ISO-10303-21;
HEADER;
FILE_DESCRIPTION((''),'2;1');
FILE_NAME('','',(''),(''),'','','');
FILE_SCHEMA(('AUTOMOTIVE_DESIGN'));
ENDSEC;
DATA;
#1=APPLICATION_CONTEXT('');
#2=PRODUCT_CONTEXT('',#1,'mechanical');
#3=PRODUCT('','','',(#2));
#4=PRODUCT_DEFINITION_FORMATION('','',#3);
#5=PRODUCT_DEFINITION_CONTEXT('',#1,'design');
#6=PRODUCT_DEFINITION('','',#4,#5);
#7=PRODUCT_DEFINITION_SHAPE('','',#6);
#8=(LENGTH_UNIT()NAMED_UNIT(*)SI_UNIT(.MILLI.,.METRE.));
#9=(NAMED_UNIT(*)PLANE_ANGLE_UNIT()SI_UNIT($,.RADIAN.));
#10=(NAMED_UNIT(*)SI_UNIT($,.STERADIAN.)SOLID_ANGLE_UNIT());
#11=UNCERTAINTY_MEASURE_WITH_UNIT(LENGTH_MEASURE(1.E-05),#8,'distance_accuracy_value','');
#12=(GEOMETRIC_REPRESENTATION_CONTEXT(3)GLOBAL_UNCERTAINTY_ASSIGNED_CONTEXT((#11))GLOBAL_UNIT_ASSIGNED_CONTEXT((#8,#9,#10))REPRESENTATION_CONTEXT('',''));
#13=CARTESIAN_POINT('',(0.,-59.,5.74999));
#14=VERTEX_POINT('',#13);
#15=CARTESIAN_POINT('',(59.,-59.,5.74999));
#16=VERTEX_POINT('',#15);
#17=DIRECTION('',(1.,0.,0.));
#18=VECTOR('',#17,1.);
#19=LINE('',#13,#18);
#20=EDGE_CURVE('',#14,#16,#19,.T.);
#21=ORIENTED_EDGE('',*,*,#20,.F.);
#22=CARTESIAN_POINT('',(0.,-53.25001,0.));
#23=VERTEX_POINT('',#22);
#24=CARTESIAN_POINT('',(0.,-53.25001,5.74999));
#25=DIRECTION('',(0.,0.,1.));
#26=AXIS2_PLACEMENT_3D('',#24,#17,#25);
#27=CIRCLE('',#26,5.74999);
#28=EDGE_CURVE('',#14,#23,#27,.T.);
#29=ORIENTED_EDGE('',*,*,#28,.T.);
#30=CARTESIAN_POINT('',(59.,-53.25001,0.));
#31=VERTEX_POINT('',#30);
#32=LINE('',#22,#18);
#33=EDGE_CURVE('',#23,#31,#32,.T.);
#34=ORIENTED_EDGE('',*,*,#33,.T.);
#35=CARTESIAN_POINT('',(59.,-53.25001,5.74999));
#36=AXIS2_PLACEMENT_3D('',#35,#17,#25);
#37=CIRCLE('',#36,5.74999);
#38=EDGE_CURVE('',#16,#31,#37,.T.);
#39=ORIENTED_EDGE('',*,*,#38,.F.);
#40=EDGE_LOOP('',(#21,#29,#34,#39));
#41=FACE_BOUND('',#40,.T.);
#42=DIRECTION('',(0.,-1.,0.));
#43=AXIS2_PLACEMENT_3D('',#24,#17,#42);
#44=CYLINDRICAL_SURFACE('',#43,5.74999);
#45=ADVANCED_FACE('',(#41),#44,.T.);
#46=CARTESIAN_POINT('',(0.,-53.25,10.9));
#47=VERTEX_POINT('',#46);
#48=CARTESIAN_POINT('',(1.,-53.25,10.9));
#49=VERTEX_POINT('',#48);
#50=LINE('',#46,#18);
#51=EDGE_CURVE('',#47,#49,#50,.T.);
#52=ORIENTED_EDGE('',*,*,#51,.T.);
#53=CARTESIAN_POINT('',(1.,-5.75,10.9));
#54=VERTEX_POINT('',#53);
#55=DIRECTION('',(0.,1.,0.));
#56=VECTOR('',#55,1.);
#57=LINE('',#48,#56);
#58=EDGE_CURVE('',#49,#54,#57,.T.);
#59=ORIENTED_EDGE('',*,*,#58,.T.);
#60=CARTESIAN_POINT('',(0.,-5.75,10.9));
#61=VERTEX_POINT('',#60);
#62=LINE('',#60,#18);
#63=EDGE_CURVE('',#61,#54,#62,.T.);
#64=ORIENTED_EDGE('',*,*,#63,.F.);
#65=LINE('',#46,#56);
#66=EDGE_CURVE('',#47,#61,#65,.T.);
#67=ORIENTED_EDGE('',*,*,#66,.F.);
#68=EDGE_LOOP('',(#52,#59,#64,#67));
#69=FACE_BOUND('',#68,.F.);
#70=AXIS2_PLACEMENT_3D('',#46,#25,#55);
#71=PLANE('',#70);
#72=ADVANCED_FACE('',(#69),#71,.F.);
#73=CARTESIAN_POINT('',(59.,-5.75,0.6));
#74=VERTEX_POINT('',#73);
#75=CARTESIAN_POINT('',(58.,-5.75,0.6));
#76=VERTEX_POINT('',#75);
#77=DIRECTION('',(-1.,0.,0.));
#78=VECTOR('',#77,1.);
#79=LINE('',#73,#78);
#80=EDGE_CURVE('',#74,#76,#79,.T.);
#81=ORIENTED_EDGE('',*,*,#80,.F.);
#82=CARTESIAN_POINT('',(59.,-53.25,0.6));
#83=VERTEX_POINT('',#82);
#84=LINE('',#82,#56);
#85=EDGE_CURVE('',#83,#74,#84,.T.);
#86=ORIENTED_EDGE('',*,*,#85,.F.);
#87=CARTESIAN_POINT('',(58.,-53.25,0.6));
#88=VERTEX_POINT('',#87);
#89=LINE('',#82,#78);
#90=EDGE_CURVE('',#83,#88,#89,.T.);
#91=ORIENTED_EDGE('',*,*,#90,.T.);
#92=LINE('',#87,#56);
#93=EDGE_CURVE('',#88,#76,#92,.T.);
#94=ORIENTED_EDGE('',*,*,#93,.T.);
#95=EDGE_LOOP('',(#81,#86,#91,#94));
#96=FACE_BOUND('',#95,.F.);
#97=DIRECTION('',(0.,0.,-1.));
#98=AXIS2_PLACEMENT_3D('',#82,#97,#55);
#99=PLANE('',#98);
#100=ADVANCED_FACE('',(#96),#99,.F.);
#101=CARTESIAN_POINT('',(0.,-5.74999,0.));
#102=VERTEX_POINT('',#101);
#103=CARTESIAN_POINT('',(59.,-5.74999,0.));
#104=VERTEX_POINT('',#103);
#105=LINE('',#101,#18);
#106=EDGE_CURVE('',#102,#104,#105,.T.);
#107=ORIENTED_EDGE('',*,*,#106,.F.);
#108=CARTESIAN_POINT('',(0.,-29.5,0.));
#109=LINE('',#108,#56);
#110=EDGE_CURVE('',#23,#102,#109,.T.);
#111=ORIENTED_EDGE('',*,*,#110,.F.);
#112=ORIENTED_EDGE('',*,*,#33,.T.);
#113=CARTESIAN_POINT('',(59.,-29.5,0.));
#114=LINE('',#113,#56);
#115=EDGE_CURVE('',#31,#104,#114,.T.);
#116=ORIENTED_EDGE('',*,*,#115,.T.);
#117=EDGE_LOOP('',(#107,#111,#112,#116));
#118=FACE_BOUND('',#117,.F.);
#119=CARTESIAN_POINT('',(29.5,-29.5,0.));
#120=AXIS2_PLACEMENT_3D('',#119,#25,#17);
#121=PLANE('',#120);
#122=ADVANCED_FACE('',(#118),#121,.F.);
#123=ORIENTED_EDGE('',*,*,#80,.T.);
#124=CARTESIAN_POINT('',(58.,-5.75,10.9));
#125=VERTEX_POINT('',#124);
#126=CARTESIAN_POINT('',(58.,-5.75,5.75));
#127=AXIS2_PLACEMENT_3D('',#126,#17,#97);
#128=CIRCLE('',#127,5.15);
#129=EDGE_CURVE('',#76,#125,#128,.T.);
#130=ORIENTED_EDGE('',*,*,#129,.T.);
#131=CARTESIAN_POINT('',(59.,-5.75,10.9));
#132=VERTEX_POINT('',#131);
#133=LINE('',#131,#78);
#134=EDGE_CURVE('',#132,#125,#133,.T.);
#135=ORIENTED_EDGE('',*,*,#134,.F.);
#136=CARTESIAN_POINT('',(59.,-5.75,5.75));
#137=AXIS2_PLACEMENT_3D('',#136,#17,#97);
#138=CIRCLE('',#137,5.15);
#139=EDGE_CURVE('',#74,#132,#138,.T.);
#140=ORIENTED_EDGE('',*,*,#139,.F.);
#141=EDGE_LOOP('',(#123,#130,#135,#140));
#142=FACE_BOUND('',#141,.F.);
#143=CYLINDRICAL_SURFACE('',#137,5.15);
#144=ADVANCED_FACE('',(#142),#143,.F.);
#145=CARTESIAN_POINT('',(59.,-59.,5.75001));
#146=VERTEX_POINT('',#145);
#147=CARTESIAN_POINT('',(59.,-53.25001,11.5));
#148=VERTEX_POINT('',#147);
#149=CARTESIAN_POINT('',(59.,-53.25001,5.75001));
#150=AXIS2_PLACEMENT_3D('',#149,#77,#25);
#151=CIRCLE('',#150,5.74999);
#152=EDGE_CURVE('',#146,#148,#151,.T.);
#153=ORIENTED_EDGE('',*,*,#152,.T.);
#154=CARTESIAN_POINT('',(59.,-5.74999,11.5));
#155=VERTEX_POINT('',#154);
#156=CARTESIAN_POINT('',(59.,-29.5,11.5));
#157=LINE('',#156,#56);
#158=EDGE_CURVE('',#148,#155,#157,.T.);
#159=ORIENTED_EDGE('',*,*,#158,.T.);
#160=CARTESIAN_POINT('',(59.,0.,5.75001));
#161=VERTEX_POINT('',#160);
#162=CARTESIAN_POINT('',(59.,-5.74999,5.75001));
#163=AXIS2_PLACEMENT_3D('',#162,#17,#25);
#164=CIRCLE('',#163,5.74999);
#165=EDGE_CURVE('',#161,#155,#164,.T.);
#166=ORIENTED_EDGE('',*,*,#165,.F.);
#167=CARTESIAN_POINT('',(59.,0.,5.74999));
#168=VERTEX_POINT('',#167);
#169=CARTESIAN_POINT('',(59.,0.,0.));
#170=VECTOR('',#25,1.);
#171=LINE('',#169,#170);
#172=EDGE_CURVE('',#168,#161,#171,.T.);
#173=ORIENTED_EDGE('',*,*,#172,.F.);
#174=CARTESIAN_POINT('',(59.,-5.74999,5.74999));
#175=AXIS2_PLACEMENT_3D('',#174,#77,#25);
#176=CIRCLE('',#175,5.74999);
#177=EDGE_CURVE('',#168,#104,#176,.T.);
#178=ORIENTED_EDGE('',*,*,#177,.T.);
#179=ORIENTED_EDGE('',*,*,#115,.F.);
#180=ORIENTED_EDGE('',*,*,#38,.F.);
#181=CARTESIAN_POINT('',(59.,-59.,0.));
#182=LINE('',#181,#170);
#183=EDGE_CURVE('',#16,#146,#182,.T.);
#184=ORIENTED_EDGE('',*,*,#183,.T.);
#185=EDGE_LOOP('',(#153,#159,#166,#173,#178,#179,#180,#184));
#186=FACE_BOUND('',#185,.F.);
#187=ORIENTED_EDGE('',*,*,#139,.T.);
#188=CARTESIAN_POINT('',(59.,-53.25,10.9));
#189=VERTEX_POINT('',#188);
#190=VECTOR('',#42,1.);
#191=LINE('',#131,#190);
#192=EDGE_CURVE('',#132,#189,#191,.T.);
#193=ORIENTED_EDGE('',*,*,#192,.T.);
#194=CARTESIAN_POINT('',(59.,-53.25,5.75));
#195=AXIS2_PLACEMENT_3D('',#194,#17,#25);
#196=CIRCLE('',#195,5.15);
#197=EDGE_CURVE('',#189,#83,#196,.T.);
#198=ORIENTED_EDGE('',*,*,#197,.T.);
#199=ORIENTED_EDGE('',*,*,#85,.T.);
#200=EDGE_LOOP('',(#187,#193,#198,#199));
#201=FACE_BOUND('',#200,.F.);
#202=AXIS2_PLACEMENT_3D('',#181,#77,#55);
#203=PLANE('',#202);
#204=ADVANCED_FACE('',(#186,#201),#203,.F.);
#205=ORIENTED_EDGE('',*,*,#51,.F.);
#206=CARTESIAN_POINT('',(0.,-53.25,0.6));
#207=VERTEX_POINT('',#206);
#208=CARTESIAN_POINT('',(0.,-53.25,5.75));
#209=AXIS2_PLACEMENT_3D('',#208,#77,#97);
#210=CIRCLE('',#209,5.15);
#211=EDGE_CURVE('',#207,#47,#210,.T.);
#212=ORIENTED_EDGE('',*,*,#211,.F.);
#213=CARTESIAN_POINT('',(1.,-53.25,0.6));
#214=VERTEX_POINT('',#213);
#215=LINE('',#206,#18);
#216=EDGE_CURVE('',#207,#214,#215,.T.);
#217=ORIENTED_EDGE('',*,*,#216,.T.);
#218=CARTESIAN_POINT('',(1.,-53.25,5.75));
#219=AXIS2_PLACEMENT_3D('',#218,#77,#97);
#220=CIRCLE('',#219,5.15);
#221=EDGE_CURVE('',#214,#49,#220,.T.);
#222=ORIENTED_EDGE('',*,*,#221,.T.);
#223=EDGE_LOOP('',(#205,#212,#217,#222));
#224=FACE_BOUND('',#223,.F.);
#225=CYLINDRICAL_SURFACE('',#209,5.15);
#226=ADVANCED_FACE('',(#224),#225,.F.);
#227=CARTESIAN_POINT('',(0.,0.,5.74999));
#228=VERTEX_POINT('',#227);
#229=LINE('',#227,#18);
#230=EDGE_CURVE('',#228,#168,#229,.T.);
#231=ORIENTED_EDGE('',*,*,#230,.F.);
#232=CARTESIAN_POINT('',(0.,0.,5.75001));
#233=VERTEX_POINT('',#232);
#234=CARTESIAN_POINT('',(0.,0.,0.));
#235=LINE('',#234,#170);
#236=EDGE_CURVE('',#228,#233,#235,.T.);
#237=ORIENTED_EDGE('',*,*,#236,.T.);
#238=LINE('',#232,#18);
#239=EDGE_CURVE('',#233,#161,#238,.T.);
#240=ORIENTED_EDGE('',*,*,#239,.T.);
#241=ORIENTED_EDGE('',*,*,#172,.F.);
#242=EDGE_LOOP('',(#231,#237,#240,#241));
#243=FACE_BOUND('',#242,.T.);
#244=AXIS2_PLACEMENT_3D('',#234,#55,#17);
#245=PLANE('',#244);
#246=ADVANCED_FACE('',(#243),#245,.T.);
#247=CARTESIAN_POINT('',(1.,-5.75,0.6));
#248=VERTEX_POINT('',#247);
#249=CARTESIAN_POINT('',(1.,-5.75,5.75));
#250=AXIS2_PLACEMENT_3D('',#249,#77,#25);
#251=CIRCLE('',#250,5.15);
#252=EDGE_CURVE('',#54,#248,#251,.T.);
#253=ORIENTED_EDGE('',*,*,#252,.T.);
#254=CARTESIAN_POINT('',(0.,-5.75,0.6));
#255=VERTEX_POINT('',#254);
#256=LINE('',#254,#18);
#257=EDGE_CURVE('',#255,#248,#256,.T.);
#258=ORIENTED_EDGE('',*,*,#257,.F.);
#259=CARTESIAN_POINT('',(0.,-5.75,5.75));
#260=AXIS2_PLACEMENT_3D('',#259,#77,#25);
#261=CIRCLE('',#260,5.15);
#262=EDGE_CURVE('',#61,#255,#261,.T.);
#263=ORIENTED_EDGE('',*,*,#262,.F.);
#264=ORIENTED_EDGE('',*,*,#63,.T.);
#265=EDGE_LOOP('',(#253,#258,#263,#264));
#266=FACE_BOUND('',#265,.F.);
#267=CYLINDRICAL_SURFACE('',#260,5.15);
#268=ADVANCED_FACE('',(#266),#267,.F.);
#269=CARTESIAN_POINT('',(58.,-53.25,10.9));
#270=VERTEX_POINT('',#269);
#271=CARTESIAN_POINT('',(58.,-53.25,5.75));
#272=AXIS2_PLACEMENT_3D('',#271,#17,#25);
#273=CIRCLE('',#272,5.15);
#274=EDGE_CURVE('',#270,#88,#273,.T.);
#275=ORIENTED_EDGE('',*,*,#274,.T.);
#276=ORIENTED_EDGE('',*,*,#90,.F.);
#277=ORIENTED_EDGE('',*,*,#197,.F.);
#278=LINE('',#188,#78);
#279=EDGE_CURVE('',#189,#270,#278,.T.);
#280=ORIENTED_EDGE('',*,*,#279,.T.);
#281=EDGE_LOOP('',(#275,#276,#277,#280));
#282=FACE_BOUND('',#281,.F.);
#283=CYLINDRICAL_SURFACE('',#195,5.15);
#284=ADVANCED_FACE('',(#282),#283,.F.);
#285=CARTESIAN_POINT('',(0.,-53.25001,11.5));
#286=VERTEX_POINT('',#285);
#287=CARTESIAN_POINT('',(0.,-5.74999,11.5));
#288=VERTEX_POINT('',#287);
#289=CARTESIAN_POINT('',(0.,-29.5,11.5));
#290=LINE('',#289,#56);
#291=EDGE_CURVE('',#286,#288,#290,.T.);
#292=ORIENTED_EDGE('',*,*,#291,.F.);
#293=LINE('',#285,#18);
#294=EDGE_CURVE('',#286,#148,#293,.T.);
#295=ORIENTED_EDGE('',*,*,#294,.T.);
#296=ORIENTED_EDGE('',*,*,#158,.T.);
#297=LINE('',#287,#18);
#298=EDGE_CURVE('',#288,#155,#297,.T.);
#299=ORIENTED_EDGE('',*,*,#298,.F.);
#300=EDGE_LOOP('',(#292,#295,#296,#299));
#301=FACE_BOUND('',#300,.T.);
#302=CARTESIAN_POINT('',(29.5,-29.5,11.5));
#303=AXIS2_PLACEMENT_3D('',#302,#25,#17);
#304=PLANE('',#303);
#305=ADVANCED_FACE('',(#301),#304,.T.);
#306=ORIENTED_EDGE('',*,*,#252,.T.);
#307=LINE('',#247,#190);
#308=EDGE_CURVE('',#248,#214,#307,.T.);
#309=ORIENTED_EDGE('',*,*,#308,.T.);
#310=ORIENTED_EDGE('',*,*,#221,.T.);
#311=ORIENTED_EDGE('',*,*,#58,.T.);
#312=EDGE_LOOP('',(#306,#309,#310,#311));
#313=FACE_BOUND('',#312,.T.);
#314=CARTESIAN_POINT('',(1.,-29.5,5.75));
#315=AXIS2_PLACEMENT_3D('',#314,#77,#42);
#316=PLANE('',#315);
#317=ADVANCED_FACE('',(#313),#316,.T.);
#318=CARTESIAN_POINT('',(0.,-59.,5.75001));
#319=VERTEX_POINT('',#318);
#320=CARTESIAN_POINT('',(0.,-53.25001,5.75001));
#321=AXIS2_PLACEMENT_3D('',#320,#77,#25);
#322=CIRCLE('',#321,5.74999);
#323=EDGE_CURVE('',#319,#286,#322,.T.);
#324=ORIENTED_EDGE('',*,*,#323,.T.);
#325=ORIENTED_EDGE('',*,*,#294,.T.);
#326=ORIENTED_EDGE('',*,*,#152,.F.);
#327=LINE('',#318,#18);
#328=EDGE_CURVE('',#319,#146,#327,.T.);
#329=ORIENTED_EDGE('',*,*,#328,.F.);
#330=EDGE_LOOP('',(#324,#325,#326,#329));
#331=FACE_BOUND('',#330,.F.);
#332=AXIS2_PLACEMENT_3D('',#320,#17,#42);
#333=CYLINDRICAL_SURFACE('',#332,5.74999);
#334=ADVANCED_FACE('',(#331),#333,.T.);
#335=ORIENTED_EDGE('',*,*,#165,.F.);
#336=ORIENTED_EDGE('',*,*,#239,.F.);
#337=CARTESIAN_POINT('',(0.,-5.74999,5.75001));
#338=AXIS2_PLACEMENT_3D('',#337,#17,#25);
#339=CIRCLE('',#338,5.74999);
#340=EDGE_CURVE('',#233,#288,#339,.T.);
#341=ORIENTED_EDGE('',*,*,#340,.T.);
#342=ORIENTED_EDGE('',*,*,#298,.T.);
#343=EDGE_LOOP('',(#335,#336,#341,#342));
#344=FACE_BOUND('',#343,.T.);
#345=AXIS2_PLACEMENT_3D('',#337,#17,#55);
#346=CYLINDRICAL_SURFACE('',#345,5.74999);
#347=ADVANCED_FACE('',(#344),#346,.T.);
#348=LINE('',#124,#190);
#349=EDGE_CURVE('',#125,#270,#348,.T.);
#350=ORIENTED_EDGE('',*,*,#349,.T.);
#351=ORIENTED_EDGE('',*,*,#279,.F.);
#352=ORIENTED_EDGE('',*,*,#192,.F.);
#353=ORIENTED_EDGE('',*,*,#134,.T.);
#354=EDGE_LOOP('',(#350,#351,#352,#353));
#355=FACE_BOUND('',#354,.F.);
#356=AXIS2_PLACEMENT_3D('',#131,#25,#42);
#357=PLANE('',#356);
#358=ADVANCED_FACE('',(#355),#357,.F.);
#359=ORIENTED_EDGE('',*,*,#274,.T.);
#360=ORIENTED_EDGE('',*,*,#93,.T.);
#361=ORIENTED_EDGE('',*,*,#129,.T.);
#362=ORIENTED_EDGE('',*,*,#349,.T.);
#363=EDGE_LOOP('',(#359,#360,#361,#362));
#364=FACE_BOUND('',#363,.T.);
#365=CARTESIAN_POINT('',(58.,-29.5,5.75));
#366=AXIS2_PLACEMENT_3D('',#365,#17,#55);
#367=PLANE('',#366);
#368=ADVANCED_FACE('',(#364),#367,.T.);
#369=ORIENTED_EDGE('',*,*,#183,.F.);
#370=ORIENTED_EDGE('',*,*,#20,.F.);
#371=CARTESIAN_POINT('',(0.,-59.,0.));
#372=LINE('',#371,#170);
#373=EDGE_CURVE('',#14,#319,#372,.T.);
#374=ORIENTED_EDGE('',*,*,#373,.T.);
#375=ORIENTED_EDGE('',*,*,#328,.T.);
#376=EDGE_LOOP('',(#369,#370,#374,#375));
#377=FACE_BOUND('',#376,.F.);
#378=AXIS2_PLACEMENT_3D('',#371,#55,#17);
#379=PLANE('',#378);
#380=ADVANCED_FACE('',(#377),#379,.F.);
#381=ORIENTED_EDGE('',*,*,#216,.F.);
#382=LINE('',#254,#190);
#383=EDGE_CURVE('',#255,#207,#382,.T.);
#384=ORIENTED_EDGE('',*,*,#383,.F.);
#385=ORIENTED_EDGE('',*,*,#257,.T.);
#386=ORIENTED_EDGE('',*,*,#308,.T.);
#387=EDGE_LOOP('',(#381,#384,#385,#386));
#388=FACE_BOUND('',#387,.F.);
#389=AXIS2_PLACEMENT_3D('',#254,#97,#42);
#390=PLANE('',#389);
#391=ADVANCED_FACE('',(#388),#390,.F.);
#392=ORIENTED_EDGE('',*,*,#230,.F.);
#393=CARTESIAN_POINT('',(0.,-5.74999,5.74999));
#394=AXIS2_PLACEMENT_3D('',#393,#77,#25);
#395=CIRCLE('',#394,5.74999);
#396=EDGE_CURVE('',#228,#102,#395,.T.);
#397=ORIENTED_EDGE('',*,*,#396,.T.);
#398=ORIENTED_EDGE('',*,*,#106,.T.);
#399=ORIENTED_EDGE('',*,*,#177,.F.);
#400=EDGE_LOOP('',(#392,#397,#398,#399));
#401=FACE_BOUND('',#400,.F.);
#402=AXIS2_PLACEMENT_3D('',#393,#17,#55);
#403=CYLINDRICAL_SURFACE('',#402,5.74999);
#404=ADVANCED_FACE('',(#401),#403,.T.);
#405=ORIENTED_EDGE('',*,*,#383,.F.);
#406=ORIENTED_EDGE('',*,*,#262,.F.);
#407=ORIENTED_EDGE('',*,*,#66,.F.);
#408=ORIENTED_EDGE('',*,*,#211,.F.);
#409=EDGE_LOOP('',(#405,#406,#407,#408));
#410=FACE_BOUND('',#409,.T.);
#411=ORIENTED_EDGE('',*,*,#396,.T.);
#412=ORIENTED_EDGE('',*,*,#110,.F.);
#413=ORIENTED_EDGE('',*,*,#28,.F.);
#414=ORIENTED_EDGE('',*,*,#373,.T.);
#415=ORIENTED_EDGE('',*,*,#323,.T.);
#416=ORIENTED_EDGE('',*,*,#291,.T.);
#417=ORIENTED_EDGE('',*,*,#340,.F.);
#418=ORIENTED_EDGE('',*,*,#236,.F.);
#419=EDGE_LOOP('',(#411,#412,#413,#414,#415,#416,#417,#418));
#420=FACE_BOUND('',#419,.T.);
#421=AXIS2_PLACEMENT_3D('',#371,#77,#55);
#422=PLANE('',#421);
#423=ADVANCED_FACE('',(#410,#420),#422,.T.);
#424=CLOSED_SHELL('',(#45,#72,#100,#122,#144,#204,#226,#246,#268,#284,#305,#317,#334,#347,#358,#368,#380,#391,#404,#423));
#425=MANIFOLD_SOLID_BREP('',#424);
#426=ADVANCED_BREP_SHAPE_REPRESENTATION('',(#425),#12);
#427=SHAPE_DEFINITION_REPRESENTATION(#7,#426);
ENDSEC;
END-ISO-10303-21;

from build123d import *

# Parameters (mm, degrees)
F0_W     = 59
F0_H     = 59
F1_DEPTH = 11.5
F2_R     = 5.74999
F4_DEPTH = 1
F6_DEPTH = 1


# Not quite as in the source:
# - a fillet or chamfer is up to 0.001 mm smaller than in the source, because OpenCascade refuses the exact size


with BuildPart() as f1:
    # F0 (on Top) → F1 (new body)
    with BuildSketch(Plane.XY):
        with Locations((29.5, -29.5)):
            Rectangle(F0_W, F0_H)
    extrude(amount=F1_DEPTH)

    # F2 (radius 5.75 in the source; OpenCascade refuses exactly that, so slightly less here)
    f2_edges = [f1.edges().sort_by_distance(p)[0] for p in [
        (29.5, -59, 11.5),
        (29.5, -59, 0),
        (29.5, 0, 11.5),
        (29.5, 0, 0),
    ]]
    fillet(f2_edges, radius=F2_R)

    # F3 (on face) → F4 (cut)
    with BuildSketch(Plane.YZ.offset(59)):
        with BuildLine():
            ThreePointArc((-5.75, 0.5999998897), (-0.5999998897, 5.75), (-5.75, 10.9000001103))
            Line((-5.75, 10.9000001103), (-53.25, 10.9000001103))
            ThreePointArc((-53.25, 10.9000001103), (-58.4000001103, 5.75), (-53.25, 0.5999998897))
            Line((-53.25, 0.5999998897), (-5.75, 0.5999998897))
        make_face()
    extrude(amount=-F4_DEPTH, mode=Mode.SUBTRACT)

    # F5 (on face) → F6 (cut)
    with BuildSketch(Plane(origin=(0, 0, 0), x_dir=(0, -1, 0), z_dir=(-1, 0, 0))):
        with BuildLine():
            Line((53.25, 10.9), (5.75, 10.9))
            ThreePointArc((5.75, 10.9), (0.6, 5.75), (5.75, 0.6))
            Line((5.75, 0.6), (53.25, 0.6))
            ThreePointArc((53.25, 0.6), (58.4, 5.75), (53.25, 10.9))
        make_face()
    extrude(amount=-F6_DEPTH, mode=Mode.SUBTRACT)


solid = f1.part
